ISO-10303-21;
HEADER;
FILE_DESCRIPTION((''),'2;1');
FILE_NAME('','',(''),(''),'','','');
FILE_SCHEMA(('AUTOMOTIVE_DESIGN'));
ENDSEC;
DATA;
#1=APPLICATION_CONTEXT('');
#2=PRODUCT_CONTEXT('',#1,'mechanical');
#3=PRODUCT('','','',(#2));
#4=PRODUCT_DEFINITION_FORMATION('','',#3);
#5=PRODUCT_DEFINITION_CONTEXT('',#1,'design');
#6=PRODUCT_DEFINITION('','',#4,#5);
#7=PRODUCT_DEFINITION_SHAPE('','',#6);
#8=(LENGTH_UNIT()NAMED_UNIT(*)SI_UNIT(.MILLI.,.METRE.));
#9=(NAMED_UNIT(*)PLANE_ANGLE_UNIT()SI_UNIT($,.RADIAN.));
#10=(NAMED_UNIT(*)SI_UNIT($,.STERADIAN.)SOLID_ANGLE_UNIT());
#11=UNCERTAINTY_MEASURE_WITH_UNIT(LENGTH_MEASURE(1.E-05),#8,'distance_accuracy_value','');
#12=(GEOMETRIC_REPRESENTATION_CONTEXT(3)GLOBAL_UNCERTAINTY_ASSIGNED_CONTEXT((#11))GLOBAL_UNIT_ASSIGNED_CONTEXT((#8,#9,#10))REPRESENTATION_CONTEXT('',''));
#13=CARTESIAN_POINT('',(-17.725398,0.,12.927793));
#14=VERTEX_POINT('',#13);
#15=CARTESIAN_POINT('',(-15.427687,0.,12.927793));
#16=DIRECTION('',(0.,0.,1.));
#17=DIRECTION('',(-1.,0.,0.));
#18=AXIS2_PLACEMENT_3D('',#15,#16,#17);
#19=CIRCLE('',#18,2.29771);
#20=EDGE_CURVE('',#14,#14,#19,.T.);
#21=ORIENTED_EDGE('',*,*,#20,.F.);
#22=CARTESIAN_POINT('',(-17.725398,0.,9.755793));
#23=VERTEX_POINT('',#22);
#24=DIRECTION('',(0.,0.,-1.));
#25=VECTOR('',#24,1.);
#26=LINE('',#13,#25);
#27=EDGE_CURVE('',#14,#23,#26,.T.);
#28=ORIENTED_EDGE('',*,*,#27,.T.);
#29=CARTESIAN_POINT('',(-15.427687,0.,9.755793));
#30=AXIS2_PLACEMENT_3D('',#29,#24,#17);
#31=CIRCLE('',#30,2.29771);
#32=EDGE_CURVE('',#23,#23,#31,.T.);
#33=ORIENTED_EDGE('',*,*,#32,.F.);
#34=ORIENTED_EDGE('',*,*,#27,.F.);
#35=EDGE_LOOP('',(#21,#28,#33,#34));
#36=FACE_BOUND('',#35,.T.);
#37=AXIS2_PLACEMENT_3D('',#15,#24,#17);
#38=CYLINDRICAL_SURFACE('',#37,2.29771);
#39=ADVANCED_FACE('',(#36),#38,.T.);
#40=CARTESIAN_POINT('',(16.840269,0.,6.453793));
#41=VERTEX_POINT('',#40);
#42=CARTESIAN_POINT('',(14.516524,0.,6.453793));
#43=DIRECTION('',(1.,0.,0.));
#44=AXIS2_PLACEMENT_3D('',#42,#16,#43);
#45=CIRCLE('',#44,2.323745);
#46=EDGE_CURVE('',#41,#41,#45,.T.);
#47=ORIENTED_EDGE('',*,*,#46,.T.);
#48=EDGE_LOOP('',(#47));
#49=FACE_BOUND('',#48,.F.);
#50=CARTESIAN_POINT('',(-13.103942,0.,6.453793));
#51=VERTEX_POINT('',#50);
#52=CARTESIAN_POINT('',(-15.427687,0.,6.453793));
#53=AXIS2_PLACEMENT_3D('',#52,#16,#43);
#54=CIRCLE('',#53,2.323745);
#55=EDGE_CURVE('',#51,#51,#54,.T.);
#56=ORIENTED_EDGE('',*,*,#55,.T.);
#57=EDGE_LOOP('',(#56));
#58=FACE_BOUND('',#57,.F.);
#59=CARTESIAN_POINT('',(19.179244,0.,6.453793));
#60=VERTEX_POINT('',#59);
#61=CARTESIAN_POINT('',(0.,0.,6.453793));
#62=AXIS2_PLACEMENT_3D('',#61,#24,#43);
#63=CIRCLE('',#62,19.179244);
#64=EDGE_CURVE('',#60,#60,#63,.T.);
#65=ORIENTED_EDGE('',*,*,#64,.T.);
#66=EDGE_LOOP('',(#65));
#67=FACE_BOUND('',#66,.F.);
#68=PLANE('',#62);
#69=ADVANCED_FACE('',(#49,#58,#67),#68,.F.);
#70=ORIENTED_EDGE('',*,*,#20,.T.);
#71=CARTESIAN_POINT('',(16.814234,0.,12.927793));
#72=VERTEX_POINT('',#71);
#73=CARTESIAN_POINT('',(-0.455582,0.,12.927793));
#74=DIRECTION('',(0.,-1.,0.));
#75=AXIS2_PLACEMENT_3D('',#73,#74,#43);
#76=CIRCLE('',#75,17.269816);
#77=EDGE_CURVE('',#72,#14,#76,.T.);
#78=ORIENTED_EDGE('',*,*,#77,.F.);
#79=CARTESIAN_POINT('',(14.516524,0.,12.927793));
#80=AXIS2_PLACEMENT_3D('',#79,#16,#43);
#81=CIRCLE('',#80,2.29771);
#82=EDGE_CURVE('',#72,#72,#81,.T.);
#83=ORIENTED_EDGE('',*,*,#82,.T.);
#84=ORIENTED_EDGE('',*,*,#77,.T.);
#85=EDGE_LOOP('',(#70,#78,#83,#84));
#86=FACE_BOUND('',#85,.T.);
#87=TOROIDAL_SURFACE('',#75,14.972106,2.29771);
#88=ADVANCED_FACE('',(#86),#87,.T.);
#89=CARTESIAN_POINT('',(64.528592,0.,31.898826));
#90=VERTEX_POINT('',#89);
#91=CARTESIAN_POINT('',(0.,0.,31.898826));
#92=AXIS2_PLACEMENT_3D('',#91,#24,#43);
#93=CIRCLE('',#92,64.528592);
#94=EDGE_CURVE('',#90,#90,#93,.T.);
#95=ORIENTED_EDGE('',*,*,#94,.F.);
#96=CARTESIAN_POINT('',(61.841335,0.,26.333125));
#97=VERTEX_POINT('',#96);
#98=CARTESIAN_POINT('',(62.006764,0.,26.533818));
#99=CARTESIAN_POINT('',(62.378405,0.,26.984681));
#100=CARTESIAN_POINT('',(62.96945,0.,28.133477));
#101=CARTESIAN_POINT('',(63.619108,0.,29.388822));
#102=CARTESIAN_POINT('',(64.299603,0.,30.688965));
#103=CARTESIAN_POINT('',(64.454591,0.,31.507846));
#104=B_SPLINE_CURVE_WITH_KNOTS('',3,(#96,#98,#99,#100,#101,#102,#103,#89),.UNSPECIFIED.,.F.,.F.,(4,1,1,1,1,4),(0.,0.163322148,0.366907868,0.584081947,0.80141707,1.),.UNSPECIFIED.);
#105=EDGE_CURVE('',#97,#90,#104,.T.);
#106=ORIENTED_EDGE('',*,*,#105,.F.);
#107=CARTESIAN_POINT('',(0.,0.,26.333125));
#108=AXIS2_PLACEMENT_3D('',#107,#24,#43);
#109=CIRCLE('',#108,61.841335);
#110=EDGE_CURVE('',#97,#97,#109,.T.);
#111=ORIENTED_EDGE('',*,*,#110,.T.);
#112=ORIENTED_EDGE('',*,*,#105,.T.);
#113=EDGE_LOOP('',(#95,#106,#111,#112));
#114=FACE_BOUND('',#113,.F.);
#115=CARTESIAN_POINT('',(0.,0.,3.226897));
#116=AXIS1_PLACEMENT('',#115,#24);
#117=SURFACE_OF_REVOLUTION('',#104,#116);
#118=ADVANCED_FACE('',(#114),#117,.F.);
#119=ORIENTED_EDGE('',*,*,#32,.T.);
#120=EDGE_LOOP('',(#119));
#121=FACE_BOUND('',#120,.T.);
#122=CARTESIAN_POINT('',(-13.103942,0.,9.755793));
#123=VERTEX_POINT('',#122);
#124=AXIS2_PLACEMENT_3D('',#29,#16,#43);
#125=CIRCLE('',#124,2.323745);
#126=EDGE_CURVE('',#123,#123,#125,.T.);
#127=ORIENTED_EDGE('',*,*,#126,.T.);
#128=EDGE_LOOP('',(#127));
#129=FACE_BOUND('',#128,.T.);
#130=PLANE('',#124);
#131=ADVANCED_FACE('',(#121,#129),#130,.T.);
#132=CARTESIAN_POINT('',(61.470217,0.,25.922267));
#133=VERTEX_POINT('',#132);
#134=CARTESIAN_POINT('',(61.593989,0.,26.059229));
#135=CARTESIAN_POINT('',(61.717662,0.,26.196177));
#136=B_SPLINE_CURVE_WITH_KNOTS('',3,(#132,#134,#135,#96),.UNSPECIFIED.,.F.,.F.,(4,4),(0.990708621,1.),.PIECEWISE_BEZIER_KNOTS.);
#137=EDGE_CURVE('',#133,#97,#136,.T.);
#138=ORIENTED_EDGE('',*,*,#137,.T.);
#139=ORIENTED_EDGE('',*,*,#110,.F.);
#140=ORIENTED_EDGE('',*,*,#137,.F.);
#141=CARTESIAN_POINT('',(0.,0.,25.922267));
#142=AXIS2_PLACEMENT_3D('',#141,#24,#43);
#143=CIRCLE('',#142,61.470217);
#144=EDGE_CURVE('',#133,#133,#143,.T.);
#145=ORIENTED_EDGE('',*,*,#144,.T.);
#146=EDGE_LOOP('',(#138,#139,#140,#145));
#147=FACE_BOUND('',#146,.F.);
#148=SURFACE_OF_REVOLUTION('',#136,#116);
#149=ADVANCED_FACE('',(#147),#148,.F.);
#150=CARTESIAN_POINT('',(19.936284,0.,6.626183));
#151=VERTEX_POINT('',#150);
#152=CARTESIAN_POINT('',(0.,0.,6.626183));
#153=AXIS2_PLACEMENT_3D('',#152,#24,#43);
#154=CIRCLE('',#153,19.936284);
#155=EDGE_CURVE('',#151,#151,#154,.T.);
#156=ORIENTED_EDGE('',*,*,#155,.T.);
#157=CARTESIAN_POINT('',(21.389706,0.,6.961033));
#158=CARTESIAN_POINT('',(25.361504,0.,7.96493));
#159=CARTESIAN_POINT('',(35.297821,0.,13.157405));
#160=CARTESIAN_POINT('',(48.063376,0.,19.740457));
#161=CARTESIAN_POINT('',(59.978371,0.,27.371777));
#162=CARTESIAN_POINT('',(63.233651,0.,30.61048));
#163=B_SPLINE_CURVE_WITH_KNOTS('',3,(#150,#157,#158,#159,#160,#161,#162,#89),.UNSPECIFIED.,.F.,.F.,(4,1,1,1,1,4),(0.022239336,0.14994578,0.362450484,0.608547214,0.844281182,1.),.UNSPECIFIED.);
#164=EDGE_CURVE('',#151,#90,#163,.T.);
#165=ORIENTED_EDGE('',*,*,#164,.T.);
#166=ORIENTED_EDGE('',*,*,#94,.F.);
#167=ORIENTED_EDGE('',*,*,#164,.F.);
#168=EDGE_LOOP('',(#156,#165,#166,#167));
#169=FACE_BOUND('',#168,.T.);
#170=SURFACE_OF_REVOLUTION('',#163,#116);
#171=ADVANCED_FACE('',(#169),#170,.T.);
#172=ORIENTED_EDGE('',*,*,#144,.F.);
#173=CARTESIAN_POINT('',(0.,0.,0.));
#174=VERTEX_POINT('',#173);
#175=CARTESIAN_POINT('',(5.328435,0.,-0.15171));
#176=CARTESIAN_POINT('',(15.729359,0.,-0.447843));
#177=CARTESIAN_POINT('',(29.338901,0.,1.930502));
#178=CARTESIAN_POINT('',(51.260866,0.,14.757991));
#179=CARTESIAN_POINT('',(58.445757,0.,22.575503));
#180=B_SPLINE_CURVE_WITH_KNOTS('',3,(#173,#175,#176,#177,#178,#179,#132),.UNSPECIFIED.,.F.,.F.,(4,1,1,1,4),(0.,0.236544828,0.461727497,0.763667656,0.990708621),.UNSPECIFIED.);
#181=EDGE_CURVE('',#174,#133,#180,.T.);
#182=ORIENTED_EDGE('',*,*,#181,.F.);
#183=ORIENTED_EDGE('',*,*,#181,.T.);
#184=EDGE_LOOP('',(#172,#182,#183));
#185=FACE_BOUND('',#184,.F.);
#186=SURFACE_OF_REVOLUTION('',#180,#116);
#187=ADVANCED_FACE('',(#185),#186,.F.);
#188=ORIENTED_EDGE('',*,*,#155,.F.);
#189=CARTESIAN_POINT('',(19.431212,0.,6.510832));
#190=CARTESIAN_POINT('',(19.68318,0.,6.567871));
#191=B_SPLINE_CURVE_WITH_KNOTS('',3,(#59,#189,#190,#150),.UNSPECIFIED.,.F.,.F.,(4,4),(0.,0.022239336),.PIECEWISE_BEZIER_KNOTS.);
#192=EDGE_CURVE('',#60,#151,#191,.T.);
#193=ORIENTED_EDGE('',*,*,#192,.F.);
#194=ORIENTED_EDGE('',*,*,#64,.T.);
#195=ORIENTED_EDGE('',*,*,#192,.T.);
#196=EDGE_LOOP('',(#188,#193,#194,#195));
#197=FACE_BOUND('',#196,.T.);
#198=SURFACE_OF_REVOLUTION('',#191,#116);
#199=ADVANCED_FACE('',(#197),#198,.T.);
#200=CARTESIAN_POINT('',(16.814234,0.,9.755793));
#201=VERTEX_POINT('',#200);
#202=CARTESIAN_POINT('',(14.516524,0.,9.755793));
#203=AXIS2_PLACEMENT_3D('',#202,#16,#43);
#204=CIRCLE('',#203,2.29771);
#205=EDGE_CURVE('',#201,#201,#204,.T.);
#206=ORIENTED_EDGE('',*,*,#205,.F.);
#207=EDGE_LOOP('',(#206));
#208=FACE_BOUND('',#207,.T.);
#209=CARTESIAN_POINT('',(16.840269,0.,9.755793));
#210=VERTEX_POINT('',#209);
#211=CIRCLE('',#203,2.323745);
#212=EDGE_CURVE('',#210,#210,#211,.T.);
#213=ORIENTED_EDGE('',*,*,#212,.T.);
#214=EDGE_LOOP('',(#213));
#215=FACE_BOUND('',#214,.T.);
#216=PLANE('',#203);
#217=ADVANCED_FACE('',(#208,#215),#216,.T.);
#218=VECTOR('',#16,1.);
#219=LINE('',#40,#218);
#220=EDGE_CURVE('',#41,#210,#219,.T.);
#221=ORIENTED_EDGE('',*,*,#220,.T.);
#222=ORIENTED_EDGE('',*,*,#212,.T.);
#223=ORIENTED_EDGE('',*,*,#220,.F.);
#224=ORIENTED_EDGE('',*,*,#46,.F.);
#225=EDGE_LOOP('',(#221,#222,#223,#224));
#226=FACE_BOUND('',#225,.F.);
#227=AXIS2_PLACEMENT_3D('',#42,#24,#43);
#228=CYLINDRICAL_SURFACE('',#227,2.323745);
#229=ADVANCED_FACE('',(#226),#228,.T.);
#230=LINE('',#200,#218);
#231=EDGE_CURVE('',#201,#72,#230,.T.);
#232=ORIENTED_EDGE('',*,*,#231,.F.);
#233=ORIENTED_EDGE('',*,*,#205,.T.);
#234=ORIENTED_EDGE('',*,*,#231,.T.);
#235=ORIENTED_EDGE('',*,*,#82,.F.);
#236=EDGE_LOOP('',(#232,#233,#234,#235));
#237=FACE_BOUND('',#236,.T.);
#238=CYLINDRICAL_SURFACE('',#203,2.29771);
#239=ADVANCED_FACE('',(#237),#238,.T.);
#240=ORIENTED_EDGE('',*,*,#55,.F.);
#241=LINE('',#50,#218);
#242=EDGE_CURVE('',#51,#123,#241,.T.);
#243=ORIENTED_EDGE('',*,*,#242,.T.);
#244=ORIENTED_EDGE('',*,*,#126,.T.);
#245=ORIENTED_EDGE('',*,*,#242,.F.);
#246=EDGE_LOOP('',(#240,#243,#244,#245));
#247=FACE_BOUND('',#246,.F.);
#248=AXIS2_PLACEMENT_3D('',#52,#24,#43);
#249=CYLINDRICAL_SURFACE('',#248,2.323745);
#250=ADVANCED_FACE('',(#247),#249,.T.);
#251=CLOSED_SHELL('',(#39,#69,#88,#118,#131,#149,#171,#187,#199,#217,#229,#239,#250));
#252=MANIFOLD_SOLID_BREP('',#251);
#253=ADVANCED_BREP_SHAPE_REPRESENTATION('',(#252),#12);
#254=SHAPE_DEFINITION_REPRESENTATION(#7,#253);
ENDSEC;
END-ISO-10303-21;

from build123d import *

# Parameters (mm, degrees)
F2_R     = 2.3237449832
F3_DEPTH = 3.302
F5_R     = 2.297710376


with BuildPart() as f1:
    # F0 (on Front) → F1 (revolve)
    with BuildSketch(Plane.XZ):
        with BuildLine():
            Line((0, 6.4537934959), (0, 0))
            add(Edge.make_bspline(
                [(0, 0), (5.3284348472, -0.151710014), (15.72935931, -0.4478428262), (29.3389014843, 1.9305018047), (51.2608661721, 14.7579911883), (58.4457571071, 22.5755026998), (61.4702167229, 25.9222669945)],
                knots=[0, 0, 0, 0, 0.2365448276, 0.4617274968, 0.7636676557, 0.990708621, 0.990708621, 0.990708621, 0.990708621], degree=3))
            add(Edge.make_bspline(
                [(61.4702167229, 25.9222669945), (61.5939891026, 26.0592293064), (61.7176621251, 26.1961773073), (61.8413351476, 26.3331253082)],
                knots=[0.990708621, 0.990708621, 0.990708621, 0.990708621, 1, 1, 1, 1], degree=3))
            add(Edge.make_bspline(
                [(19.9362844459, 6.6261832632), (23.0642313587, 6.9219216887), (33.6752694158, 9.3293914475), (61.2871102192, 26.430349091), (61.8413351476, 26.3331253082)],
                knots=[0.3055996998, 0.3055996998, 0.3055996998, 0.3055996998, 0.5203732934, 0.9456071412, 0.9456071412, 0.9456071412, 0.9456071412], degree=3))
            add(Edge.make_bspline(
                [(19.1792435944, 6.4537934959), (19.4312115798, 6.5108323155), (19.6831795651, 6.5678711352), (19.9362844459, 6.6261832632)],
                knots=[0, 0, 0, 0, 0.0222393359, 0.0222393359, 0.0222393359, 0.0222393359], degree=3))
            Line((19.1792435944, 6.4537934959), (16.7044717818, 6.4537934959))
            add(Edge.make_bspline(
                [(6.8562417291, 6.4537934959), (10.174427629, 6.4130106646), (13.4923483806, 6.3724655133), (16.7044717818, 6.4537934959)],
                knots=[0, 0, 0, 0, 0.2294042785, 0.2294042785, 0.2294042785, 0.2294042785], degree=3))
            Line((6.8562417291, 6.4537934959), (0, 6.4537934959))
        make_face()
        with BuildLine():
            add(Edge.make_bspline(
                [(19.9362844459, 6.6261832632), (23.0642313587, 6.9219216887), (33.6752694158, 9.3293914475), (61.2871102192, 26.430349091), (61.8413351476, 26.3331253082)],
                knots=[0.3055996998, 0.3055996998, 0.3055996998, 0.3055996998, 0.5203732934, 0.9456071412, 0.9456071412, 0.9456071412, 0.9456071412], degree=3))
            add(Edge.make_bspline(
                [(61.8413351476, 26.3331253082), (62.0067642507, 26.5338182356), (62.3784054543, 26.9846806276), (62.9694504555, 28.1334772092), (63.6191083309, 29.3888215381), (64.2996026431, 30.6889648721), (64.4545914573, 31.5078459617), (64.5285919309, 31.8988263607)],
                knots=[0, 0, 0, 0, 0.1633221476, 0.3669078679, 0.5840819466, 0.8014170695, 1, 1, 1, 1], degree=3))
            add(Edge.make_bspline(
                [(19.9362844459, 6.6261832632), (21.3897057398, 6.9610329441), (25.3615042434, 7.9649295402), (35.2978213246, 13.157404991), (48.0633763397, 19.7404571448), (59.9783712145, 27.3717771756), (63.2336508428, 30.610479627), (64.5285919309, 31.8988263607)],
                knots=[0.0222393359, 0.0222393359, 0.0222393359, 0.0222393359, 0.1499457799, 0.3624504838, 0.6085472144, 0.844281182, 1, 1, 1, 1], degree=3))
        make_face()
        with BuildLine():
            Line((16.7044717818, 6.4537934959), (6.8562417291, 6.4537934959))
            add(Edge.make_bspline(
                [(6.8562417291, 6.4537934959), (10.174427629, 6.4130106646), (13.4923483806, 6.3724655133), (16.7044717818, 6.4537934959)],
                knots=[0, 0, 0, 0, 0.2294042785, 0.2294042785, 0.2294042785, 0.2294042785], degree=3))
        make_face()
    revolve(axis=Axis((0, 0, 3.2268967479), (0, 0, -1)))

    # F2 (on face) → F3 (join)
    with BuildSketch(Plane.XY.offset(6.4537934959)):
        with Locations((14.5165240392, 0)):
            Circle(F2_R)
        with Locations((-15.4276872054, 0)):
            Circle(F2_R)
    extrude(amount=F3_DEPTH)

    # F6: sweep along a path in F4
    with BuildLine(Plane.XZ) as f6_path:
        Line((12.192779056, 9.7557934959), (12.192779056, 12.927793109))
        ThreePointArc((12.192779056, 12.927793109), (-0.4555815831, 25.5761537481), (-13.1039422222, 12.927793109))
        Line((-13.1039422222, 12.927793109), (-13.1039422222, 9.7557934959))
    # F5 (on face) → F6 (sweep)
    with BuildSketch(Plane.XY.offset(9.7557934959)):
        with Locations((14.5165240392, 0)):
            Circle(F5_R)
    sweep(path=f6_path.line)


solid = f1.part
